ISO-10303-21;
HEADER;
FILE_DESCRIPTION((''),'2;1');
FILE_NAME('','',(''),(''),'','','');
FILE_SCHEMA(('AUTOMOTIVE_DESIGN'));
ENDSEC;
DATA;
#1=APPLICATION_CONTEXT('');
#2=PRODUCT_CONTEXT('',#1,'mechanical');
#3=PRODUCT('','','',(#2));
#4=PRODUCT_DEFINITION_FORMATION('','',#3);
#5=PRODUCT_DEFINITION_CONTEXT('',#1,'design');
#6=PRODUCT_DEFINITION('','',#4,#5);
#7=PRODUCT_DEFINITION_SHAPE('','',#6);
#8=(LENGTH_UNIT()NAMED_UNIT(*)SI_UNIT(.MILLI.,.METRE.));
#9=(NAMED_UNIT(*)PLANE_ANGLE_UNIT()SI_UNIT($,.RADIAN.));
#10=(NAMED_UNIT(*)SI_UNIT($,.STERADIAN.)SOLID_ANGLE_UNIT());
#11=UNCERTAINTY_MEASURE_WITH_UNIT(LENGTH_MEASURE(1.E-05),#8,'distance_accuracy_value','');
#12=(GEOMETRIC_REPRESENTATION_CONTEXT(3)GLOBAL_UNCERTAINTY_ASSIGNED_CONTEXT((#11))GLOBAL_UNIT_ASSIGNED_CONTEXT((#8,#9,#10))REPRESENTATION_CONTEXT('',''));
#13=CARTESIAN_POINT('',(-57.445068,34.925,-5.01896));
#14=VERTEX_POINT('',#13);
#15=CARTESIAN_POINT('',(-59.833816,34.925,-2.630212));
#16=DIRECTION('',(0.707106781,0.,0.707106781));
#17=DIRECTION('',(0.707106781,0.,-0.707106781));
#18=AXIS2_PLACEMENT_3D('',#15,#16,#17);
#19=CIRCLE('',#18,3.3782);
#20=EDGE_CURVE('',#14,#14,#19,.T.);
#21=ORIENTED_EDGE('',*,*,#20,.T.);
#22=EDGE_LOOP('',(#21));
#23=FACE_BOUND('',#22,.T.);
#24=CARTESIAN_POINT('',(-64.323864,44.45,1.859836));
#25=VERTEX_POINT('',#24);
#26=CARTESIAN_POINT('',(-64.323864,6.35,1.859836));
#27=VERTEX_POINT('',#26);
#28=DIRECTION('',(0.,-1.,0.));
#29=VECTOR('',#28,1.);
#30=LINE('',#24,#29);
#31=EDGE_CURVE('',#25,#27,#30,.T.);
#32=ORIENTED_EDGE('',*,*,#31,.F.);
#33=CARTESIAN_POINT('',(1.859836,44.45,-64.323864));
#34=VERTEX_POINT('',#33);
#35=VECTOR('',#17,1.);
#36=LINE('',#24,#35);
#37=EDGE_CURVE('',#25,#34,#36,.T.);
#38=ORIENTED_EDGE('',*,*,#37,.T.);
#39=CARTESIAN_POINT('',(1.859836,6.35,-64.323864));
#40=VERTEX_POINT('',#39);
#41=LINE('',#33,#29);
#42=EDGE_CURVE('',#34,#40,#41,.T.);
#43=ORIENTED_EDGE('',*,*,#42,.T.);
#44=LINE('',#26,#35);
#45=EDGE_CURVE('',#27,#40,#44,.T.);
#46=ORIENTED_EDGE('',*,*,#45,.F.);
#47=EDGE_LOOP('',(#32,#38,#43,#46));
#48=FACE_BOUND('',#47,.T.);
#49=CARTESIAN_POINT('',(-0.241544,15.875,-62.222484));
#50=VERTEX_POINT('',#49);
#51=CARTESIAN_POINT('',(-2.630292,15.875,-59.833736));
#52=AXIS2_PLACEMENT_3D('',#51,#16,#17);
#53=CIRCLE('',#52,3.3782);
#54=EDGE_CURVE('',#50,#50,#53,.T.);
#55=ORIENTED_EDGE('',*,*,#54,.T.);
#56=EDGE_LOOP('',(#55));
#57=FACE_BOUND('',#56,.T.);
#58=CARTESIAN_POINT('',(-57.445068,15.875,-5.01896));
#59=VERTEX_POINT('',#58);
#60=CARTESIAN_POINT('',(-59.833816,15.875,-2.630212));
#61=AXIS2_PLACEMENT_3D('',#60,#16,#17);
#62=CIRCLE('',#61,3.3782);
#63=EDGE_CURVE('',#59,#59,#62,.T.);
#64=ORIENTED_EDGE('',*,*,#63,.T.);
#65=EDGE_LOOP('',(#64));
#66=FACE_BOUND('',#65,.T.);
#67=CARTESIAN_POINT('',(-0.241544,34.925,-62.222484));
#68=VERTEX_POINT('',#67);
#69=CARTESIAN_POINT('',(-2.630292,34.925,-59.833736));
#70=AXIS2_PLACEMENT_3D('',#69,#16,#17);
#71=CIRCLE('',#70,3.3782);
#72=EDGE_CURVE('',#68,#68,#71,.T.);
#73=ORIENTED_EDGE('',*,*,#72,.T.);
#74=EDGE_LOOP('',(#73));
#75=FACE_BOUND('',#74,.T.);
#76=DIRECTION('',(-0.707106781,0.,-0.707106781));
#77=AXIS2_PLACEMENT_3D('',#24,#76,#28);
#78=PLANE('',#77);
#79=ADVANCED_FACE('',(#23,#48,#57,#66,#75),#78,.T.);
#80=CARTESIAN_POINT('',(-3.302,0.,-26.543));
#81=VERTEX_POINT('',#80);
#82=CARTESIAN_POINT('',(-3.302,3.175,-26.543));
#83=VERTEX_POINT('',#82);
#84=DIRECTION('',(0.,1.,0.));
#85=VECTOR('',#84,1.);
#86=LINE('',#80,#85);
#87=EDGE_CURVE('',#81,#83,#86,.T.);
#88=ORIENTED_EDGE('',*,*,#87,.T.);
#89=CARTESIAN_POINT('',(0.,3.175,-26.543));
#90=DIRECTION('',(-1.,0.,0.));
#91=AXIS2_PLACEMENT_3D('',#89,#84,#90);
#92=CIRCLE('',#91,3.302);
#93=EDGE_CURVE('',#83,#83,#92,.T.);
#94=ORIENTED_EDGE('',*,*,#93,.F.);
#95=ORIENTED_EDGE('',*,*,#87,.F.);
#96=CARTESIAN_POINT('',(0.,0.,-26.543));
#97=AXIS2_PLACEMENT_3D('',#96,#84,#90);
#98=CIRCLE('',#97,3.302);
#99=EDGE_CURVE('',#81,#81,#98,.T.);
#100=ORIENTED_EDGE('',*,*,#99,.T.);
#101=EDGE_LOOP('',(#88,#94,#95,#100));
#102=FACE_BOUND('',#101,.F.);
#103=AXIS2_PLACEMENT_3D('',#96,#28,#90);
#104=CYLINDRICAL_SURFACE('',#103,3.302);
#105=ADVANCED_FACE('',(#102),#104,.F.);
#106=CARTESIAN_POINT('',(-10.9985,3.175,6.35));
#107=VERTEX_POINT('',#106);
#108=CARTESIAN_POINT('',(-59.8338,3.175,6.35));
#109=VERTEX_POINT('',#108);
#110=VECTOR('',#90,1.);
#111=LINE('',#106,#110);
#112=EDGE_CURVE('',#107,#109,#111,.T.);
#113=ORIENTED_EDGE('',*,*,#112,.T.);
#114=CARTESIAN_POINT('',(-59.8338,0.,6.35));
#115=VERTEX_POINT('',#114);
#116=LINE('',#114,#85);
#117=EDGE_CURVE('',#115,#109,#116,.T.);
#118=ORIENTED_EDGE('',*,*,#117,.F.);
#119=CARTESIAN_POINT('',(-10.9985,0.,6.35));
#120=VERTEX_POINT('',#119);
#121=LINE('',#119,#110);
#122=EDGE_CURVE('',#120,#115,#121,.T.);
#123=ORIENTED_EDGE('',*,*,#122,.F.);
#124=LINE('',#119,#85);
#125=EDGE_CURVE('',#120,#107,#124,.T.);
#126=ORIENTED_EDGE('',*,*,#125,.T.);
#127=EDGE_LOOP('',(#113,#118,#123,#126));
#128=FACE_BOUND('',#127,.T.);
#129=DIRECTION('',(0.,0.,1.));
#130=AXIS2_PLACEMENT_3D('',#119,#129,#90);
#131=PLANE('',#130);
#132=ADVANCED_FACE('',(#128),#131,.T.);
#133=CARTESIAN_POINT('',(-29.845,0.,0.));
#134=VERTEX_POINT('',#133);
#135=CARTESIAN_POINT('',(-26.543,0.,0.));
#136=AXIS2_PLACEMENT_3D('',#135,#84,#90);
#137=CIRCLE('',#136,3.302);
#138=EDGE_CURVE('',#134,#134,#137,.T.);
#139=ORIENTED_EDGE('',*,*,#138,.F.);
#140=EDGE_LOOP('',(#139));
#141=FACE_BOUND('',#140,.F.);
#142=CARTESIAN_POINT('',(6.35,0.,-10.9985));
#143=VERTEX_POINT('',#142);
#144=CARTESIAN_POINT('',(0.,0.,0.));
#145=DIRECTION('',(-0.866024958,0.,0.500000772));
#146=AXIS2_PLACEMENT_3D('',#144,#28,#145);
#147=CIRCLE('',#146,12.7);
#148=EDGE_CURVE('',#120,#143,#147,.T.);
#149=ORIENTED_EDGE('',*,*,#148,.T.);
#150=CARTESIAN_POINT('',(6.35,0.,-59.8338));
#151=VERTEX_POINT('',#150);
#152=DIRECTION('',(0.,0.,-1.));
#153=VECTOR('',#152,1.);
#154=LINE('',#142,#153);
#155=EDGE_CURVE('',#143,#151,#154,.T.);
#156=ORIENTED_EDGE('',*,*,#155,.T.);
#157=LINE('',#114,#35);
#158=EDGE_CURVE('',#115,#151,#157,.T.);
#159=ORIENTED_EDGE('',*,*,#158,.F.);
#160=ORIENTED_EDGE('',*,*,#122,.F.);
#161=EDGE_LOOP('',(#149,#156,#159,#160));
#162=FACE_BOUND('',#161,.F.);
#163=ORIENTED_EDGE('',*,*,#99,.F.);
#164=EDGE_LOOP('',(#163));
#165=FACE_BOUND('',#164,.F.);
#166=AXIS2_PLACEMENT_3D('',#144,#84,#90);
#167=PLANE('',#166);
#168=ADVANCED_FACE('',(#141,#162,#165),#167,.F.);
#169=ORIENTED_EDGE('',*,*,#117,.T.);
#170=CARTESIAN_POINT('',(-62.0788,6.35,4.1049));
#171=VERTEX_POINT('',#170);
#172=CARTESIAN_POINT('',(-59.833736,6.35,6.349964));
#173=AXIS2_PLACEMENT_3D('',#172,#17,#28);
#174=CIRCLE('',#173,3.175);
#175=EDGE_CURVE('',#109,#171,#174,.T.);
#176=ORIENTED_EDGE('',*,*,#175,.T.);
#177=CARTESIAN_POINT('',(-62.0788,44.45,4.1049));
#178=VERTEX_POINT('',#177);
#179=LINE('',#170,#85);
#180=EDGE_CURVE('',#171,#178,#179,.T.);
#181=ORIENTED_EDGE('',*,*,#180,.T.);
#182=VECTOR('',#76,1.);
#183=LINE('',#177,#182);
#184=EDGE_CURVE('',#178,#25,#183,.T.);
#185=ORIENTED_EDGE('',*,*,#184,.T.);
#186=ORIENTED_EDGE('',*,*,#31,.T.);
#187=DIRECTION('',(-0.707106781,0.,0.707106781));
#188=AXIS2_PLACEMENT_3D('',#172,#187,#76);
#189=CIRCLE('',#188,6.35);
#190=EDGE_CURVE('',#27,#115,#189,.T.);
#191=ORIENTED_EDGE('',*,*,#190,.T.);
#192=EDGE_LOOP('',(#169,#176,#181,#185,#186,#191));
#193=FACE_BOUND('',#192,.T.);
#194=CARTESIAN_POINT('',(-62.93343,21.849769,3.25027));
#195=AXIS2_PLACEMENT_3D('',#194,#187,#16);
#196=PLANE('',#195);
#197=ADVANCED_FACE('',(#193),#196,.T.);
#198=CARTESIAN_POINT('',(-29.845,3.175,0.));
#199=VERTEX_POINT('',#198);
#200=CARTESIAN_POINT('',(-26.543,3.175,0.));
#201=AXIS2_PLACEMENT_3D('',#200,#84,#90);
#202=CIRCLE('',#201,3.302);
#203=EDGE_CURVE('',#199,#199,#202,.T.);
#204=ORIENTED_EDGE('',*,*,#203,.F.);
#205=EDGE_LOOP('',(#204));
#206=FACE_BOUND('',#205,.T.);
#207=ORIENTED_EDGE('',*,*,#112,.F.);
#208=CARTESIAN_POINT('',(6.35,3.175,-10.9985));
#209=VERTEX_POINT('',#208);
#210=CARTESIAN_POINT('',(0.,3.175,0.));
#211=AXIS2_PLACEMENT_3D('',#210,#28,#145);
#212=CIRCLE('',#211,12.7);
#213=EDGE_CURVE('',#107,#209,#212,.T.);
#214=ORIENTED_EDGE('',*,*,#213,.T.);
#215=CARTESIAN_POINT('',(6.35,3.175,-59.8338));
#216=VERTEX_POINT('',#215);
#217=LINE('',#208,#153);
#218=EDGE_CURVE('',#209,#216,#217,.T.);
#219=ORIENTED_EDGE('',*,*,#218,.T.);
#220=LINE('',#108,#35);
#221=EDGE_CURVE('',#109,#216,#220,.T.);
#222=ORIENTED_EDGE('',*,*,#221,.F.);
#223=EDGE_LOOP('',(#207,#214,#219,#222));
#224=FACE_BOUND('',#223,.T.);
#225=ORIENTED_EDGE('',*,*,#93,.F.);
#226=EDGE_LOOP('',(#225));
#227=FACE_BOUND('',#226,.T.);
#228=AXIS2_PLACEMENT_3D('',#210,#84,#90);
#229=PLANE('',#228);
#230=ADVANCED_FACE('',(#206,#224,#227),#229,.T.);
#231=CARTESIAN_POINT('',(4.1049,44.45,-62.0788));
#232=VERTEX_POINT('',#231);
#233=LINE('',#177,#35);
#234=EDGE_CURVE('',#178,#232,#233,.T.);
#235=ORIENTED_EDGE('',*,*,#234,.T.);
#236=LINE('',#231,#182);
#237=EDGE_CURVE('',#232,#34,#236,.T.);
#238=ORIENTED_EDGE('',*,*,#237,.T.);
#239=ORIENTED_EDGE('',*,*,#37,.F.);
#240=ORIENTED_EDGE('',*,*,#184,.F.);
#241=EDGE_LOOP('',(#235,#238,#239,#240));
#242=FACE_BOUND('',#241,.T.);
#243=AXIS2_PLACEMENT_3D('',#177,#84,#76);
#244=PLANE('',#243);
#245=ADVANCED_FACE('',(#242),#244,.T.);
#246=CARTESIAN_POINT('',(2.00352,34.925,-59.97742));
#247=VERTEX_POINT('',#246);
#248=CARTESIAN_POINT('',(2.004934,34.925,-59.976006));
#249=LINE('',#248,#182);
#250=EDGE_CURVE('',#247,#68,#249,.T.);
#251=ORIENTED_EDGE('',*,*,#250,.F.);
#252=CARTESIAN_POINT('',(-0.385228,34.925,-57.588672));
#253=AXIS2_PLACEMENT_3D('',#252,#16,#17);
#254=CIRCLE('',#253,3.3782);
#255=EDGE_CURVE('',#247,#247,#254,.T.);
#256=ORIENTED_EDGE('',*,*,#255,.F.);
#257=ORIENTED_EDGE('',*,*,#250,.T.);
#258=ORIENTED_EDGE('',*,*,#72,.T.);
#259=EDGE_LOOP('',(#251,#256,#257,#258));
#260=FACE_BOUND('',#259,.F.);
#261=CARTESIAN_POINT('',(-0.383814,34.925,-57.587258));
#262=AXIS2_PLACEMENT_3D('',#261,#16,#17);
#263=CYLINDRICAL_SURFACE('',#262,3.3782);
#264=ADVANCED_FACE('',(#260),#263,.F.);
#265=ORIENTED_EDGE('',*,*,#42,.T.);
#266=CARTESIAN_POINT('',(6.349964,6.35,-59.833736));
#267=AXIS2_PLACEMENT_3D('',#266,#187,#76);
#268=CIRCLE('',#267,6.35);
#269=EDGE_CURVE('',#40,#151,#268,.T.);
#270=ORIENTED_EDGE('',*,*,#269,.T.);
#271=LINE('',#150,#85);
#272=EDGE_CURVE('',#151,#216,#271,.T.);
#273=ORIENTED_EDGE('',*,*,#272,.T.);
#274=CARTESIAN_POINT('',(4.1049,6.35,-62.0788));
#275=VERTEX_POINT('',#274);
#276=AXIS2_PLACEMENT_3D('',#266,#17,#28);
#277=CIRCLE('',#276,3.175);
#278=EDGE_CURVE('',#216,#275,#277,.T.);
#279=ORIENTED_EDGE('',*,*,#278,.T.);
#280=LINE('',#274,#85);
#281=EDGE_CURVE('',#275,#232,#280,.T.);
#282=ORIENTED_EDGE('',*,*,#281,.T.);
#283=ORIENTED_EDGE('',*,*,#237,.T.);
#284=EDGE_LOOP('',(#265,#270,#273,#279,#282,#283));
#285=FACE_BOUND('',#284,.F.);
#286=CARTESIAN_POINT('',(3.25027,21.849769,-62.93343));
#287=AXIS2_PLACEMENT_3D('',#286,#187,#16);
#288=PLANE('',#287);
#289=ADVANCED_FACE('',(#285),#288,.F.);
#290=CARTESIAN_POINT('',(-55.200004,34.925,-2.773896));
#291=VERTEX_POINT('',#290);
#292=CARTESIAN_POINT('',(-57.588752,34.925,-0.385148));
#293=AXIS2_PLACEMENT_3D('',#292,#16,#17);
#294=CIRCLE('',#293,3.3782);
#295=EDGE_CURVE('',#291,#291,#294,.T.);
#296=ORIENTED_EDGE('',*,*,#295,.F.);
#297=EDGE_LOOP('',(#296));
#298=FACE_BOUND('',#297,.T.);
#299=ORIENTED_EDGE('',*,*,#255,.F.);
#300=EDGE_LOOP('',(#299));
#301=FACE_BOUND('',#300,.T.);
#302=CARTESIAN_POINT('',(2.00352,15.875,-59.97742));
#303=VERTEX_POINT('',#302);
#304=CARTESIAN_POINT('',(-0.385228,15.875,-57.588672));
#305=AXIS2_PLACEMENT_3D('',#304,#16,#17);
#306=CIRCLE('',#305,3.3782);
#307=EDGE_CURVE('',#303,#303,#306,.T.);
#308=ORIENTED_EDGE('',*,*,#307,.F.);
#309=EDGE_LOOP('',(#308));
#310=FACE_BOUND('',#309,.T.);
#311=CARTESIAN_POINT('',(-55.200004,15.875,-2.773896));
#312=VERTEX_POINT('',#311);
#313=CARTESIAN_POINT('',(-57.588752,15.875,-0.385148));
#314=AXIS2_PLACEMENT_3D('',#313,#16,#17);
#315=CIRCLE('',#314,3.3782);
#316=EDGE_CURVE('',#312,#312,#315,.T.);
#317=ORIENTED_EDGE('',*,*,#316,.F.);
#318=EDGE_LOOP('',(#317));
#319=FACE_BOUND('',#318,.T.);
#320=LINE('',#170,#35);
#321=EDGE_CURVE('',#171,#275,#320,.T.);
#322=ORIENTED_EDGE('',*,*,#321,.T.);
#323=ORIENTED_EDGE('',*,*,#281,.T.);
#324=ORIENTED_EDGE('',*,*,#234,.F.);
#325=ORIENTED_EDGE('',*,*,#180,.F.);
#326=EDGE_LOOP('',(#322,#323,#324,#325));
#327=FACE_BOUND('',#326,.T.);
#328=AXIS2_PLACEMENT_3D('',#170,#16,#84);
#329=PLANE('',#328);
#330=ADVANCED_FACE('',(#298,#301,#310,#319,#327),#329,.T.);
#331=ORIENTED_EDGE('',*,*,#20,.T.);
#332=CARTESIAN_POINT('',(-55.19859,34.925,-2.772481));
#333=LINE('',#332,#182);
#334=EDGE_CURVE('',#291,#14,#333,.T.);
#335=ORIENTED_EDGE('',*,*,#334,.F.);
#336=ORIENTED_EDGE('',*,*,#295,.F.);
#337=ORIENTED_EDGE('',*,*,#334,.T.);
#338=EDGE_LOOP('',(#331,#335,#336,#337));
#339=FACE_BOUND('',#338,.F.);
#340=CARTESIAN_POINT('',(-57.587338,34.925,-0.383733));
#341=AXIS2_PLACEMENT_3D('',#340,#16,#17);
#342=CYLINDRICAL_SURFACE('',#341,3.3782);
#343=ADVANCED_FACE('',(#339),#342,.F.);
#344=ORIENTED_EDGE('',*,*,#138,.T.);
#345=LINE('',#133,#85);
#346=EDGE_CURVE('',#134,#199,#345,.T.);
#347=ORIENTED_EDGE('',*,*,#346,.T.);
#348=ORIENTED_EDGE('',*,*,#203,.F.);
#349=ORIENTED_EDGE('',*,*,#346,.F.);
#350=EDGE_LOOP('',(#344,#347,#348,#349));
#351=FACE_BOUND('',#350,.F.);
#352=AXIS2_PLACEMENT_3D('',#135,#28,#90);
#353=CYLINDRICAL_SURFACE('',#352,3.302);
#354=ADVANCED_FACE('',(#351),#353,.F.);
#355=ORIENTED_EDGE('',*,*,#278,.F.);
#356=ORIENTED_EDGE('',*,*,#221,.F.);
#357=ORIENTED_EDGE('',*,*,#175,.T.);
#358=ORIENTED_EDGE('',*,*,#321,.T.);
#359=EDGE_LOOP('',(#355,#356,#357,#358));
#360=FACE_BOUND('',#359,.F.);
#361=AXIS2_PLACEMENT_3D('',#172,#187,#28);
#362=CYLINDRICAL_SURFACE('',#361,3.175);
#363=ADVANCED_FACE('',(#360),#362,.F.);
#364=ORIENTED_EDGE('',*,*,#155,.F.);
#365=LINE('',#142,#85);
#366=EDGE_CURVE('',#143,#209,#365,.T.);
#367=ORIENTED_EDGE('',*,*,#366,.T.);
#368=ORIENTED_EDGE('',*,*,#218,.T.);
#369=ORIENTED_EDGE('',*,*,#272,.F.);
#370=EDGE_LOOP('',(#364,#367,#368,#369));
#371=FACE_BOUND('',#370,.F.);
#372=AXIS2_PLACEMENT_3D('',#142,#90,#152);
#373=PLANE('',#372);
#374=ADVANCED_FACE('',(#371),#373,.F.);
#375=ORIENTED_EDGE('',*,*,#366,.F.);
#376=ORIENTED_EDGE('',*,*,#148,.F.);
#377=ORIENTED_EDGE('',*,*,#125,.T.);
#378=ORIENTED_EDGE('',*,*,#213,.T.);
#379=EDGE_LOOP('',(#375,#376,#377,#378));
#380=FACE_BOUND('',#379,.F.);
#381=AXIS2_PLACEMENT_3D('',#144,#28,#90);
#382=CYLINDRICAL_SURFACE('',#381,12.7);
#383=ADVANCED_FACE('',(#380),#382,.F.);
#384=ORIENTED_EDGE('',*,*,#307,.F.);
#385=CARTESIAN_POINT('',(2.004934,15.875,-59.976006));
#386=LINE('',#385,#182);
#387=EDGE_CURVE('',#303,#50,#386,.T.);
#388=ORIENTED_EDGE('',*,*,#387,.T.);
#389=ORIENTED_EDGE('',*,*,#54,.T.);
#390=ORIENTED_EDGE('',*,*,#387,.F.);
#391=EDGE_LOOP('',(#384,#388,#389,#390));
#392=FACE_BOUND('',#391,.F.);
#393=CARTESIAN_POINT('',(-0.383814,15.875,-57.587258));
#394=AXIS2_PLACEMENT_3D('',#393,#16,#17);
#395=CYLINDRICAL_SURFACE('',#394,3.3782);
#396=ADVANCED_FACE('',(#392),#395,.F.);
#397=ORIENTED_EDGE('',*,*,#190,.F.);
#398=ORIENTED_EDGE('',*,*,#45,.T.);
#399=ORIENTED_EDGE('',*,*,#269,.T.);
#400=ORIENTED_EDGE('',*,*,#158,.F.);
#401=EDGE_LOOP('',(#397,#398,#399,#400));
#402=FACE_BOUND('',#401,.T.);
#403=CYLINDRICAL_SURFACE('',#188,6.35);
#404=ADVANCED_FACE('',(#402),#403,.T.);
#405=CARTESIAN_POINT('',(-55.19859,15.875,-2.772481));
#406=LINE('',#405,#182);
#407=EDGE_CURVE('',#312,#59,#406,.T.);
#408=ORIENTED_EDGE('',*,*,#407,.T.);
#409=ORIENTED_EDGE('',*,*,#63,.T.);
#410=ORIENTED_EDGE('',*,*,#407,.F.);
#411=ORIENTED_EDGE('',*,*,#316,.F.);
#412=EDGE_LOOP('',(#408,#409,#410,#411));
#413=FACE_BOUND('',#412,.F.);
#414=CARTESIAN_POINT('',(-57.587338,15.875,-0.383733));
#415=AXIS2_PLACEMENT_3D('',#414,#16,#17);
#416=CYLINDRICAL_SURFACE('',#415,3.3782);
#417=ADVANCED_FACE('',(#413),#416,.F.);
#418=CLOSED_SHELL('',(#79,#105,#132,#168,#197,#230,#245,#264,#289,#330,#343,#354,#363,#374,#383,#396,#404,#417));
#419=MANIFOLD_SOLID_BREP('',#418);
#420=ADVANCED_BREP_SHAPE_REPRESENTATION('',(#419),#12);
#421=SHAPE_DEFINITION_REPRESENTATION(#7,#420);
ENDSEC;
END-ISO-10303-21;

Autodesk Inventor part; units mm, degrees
ref_plane "YZ Plane" through (0, 0, 0) normal (1, 0, 0) x (0, 1, 0)
ref_plane "XZ Plane" through (0, 0, 0) normal (0, 1, 0) x (-1, 0, 0)
ref_plane "XY Plane" through (0, 0, 0) normal (0, 0, 1) x (1, 0, 0)
sketch "Sketch1" plane through (0, 0, 0) normal (0, 1, 0) x (-1, 0, 0)
  circle A0 centre (0, 0) radius 26.543 construction
  circle A1 centre (0, 26.543) radius 3.302
  circle A2 centre (26.543, 0) radius 3.302
  circle A3 centre (0, -26.543) radius 3.302
  circle A4 centre (-26.543, 0) radius 3.302
  circle A5 centre (0, 0) radius 12.7
  line L0 (0, 0) -> (-8.4134, 0) construction
  line L1 (10.9985, 6.35) -> (59.8338, 6.35)
  line L2 (-6.35, -10.9985) -> (-6.35, -59.8338)
  line L3 (59.8338, 6.35) -> (-6.35, -59.8338)
  dimension "d0" = 53.086
  dimension "d1" = 6.604
  dimension "d2" = 6.604
  dimension "d3" = 6.604
  dimension "d4" = 6.604
  dimension "d5" = 25.4
  dimension "d8" = 6.35
  dimension "d9" = 0
  dimension "d10" = 6.35
  dimension "d11" = 6.35
  dimension "d12" = 45
  dimension "d13" = 19.05
extrude "Plate1" add sketch "Sketch1" along normal blind 3.175 contours A5 L1 L3 L2
sketch "Sketch2" plane through (-62.0788, 6.35, 4.1049) normal (-0.7071068, 0, -0.7071068) x (0, -1, 0)
  line L0 (0, -93.598) -> (0, 0)
  line L1 (0, 0) -> (-38.1, 0)
  line L2 (-38.1, 0) -> (-38.1, -93.598)
  line L3 (-38.1, -93.598) -> (0, -93.598)
edge flange "Flange1" height 44.45 angle 90 thickness 3.175 bend radius 3.175 thickness toward (-0.7071068, 0, -0.7071068) relief tear relief width 3.175 relief depth 1.5875 edges at (-26.7419, 3.175, -26.7419) wall of the first edge with corners at (4.1049, 6.35, -62.0788) (-62.0788, 6.35, 4.1049) (-62.0788, 44.45, 4.1049) (4.1049, 44.45, -62.0788)
bend "Bend1"
corner "Corner1"
sketch "Sketch3" plane through (4.1049, 6.35, -62.0788) normal (0.7071068, 0, 0.7071068) x (0.7071068, 0, -0.7071068)
  line L0 (0, 38.1) -> (-93.598, 38.1) projected
  line L1 (0, 38.1) -> (0, 0) projected
  line L2 (-93.598, 38.1) -> (-93.598, 0) projected
  line L3 (-93.598, 0) -> (0, 0) projected
  circle A0 centre (-87.248, 28.575) radius 3.3782
  circle A1 centre (-6.35, 28.575) radius 3.3782
  circle A2 centre (-6.35, 9.525) radius 3.3782
  circle A3 centre (-87.248, 9.525) radius 3.3782
  point P0 (-46.799, -6.35)
  dimension "d35" = 93.598
  dimension "d36" = 6.7564
  dimension "d37" = 6.7564
  dimension "d38" = 6.7564
  dimension "d39" = 6.7564
  dimension "d40" = 6.35
  dimension "d41" = 9.525
  dimension "d42" = 9.525
  dimension "d43" = 6.35
  dimension "d44" = 9.525
  dimension "d45" = 9.525
  dimension "d47" = 6.35
  dimension "d48" = 6.35
extrude "Cut3" cut sketch "Sketch3" against normal blind 3.175 contours A0 | A1 | A2 | A3
equation "\"d49\" = Thickness"
equation "\"d15\" = BendReliefWidth"
equation "\"d16\" = BendReliefDepth"
equation "\"d17\" = MinimumRemnant"
equation "\"d18\" = BendRadius"
equation "\"d21\" = BendRadius"
equation "\"d22\" = CornerReliefSize"
equation "\"d23\" = GapSize"
equation "\"d24\" = JacobiRadiusSize"
equation "\"BendRadius\" = Thickness"
equation "\"BendReliefWidth\" = Thickness"
equation "\"BendReliefDepth\" = 0.5 * Thickness"
equation "\"CornerReliefSize\" = 4 * Thickness"
equation "\"MinimumRemnant\" = 2 * Thickness"
equation "\"TransitionRadius\" = BendRadius"
equation "\"JacobiRadiusSize\" = BendRadius"
equation "\"GapSize\" = Thickness"
equation "\"d14\" = BendRadius"
equation "\"Thickness\" = 3.175"
properties part number "Bearing Mount 3 v1" material "Aluminum 6061"
